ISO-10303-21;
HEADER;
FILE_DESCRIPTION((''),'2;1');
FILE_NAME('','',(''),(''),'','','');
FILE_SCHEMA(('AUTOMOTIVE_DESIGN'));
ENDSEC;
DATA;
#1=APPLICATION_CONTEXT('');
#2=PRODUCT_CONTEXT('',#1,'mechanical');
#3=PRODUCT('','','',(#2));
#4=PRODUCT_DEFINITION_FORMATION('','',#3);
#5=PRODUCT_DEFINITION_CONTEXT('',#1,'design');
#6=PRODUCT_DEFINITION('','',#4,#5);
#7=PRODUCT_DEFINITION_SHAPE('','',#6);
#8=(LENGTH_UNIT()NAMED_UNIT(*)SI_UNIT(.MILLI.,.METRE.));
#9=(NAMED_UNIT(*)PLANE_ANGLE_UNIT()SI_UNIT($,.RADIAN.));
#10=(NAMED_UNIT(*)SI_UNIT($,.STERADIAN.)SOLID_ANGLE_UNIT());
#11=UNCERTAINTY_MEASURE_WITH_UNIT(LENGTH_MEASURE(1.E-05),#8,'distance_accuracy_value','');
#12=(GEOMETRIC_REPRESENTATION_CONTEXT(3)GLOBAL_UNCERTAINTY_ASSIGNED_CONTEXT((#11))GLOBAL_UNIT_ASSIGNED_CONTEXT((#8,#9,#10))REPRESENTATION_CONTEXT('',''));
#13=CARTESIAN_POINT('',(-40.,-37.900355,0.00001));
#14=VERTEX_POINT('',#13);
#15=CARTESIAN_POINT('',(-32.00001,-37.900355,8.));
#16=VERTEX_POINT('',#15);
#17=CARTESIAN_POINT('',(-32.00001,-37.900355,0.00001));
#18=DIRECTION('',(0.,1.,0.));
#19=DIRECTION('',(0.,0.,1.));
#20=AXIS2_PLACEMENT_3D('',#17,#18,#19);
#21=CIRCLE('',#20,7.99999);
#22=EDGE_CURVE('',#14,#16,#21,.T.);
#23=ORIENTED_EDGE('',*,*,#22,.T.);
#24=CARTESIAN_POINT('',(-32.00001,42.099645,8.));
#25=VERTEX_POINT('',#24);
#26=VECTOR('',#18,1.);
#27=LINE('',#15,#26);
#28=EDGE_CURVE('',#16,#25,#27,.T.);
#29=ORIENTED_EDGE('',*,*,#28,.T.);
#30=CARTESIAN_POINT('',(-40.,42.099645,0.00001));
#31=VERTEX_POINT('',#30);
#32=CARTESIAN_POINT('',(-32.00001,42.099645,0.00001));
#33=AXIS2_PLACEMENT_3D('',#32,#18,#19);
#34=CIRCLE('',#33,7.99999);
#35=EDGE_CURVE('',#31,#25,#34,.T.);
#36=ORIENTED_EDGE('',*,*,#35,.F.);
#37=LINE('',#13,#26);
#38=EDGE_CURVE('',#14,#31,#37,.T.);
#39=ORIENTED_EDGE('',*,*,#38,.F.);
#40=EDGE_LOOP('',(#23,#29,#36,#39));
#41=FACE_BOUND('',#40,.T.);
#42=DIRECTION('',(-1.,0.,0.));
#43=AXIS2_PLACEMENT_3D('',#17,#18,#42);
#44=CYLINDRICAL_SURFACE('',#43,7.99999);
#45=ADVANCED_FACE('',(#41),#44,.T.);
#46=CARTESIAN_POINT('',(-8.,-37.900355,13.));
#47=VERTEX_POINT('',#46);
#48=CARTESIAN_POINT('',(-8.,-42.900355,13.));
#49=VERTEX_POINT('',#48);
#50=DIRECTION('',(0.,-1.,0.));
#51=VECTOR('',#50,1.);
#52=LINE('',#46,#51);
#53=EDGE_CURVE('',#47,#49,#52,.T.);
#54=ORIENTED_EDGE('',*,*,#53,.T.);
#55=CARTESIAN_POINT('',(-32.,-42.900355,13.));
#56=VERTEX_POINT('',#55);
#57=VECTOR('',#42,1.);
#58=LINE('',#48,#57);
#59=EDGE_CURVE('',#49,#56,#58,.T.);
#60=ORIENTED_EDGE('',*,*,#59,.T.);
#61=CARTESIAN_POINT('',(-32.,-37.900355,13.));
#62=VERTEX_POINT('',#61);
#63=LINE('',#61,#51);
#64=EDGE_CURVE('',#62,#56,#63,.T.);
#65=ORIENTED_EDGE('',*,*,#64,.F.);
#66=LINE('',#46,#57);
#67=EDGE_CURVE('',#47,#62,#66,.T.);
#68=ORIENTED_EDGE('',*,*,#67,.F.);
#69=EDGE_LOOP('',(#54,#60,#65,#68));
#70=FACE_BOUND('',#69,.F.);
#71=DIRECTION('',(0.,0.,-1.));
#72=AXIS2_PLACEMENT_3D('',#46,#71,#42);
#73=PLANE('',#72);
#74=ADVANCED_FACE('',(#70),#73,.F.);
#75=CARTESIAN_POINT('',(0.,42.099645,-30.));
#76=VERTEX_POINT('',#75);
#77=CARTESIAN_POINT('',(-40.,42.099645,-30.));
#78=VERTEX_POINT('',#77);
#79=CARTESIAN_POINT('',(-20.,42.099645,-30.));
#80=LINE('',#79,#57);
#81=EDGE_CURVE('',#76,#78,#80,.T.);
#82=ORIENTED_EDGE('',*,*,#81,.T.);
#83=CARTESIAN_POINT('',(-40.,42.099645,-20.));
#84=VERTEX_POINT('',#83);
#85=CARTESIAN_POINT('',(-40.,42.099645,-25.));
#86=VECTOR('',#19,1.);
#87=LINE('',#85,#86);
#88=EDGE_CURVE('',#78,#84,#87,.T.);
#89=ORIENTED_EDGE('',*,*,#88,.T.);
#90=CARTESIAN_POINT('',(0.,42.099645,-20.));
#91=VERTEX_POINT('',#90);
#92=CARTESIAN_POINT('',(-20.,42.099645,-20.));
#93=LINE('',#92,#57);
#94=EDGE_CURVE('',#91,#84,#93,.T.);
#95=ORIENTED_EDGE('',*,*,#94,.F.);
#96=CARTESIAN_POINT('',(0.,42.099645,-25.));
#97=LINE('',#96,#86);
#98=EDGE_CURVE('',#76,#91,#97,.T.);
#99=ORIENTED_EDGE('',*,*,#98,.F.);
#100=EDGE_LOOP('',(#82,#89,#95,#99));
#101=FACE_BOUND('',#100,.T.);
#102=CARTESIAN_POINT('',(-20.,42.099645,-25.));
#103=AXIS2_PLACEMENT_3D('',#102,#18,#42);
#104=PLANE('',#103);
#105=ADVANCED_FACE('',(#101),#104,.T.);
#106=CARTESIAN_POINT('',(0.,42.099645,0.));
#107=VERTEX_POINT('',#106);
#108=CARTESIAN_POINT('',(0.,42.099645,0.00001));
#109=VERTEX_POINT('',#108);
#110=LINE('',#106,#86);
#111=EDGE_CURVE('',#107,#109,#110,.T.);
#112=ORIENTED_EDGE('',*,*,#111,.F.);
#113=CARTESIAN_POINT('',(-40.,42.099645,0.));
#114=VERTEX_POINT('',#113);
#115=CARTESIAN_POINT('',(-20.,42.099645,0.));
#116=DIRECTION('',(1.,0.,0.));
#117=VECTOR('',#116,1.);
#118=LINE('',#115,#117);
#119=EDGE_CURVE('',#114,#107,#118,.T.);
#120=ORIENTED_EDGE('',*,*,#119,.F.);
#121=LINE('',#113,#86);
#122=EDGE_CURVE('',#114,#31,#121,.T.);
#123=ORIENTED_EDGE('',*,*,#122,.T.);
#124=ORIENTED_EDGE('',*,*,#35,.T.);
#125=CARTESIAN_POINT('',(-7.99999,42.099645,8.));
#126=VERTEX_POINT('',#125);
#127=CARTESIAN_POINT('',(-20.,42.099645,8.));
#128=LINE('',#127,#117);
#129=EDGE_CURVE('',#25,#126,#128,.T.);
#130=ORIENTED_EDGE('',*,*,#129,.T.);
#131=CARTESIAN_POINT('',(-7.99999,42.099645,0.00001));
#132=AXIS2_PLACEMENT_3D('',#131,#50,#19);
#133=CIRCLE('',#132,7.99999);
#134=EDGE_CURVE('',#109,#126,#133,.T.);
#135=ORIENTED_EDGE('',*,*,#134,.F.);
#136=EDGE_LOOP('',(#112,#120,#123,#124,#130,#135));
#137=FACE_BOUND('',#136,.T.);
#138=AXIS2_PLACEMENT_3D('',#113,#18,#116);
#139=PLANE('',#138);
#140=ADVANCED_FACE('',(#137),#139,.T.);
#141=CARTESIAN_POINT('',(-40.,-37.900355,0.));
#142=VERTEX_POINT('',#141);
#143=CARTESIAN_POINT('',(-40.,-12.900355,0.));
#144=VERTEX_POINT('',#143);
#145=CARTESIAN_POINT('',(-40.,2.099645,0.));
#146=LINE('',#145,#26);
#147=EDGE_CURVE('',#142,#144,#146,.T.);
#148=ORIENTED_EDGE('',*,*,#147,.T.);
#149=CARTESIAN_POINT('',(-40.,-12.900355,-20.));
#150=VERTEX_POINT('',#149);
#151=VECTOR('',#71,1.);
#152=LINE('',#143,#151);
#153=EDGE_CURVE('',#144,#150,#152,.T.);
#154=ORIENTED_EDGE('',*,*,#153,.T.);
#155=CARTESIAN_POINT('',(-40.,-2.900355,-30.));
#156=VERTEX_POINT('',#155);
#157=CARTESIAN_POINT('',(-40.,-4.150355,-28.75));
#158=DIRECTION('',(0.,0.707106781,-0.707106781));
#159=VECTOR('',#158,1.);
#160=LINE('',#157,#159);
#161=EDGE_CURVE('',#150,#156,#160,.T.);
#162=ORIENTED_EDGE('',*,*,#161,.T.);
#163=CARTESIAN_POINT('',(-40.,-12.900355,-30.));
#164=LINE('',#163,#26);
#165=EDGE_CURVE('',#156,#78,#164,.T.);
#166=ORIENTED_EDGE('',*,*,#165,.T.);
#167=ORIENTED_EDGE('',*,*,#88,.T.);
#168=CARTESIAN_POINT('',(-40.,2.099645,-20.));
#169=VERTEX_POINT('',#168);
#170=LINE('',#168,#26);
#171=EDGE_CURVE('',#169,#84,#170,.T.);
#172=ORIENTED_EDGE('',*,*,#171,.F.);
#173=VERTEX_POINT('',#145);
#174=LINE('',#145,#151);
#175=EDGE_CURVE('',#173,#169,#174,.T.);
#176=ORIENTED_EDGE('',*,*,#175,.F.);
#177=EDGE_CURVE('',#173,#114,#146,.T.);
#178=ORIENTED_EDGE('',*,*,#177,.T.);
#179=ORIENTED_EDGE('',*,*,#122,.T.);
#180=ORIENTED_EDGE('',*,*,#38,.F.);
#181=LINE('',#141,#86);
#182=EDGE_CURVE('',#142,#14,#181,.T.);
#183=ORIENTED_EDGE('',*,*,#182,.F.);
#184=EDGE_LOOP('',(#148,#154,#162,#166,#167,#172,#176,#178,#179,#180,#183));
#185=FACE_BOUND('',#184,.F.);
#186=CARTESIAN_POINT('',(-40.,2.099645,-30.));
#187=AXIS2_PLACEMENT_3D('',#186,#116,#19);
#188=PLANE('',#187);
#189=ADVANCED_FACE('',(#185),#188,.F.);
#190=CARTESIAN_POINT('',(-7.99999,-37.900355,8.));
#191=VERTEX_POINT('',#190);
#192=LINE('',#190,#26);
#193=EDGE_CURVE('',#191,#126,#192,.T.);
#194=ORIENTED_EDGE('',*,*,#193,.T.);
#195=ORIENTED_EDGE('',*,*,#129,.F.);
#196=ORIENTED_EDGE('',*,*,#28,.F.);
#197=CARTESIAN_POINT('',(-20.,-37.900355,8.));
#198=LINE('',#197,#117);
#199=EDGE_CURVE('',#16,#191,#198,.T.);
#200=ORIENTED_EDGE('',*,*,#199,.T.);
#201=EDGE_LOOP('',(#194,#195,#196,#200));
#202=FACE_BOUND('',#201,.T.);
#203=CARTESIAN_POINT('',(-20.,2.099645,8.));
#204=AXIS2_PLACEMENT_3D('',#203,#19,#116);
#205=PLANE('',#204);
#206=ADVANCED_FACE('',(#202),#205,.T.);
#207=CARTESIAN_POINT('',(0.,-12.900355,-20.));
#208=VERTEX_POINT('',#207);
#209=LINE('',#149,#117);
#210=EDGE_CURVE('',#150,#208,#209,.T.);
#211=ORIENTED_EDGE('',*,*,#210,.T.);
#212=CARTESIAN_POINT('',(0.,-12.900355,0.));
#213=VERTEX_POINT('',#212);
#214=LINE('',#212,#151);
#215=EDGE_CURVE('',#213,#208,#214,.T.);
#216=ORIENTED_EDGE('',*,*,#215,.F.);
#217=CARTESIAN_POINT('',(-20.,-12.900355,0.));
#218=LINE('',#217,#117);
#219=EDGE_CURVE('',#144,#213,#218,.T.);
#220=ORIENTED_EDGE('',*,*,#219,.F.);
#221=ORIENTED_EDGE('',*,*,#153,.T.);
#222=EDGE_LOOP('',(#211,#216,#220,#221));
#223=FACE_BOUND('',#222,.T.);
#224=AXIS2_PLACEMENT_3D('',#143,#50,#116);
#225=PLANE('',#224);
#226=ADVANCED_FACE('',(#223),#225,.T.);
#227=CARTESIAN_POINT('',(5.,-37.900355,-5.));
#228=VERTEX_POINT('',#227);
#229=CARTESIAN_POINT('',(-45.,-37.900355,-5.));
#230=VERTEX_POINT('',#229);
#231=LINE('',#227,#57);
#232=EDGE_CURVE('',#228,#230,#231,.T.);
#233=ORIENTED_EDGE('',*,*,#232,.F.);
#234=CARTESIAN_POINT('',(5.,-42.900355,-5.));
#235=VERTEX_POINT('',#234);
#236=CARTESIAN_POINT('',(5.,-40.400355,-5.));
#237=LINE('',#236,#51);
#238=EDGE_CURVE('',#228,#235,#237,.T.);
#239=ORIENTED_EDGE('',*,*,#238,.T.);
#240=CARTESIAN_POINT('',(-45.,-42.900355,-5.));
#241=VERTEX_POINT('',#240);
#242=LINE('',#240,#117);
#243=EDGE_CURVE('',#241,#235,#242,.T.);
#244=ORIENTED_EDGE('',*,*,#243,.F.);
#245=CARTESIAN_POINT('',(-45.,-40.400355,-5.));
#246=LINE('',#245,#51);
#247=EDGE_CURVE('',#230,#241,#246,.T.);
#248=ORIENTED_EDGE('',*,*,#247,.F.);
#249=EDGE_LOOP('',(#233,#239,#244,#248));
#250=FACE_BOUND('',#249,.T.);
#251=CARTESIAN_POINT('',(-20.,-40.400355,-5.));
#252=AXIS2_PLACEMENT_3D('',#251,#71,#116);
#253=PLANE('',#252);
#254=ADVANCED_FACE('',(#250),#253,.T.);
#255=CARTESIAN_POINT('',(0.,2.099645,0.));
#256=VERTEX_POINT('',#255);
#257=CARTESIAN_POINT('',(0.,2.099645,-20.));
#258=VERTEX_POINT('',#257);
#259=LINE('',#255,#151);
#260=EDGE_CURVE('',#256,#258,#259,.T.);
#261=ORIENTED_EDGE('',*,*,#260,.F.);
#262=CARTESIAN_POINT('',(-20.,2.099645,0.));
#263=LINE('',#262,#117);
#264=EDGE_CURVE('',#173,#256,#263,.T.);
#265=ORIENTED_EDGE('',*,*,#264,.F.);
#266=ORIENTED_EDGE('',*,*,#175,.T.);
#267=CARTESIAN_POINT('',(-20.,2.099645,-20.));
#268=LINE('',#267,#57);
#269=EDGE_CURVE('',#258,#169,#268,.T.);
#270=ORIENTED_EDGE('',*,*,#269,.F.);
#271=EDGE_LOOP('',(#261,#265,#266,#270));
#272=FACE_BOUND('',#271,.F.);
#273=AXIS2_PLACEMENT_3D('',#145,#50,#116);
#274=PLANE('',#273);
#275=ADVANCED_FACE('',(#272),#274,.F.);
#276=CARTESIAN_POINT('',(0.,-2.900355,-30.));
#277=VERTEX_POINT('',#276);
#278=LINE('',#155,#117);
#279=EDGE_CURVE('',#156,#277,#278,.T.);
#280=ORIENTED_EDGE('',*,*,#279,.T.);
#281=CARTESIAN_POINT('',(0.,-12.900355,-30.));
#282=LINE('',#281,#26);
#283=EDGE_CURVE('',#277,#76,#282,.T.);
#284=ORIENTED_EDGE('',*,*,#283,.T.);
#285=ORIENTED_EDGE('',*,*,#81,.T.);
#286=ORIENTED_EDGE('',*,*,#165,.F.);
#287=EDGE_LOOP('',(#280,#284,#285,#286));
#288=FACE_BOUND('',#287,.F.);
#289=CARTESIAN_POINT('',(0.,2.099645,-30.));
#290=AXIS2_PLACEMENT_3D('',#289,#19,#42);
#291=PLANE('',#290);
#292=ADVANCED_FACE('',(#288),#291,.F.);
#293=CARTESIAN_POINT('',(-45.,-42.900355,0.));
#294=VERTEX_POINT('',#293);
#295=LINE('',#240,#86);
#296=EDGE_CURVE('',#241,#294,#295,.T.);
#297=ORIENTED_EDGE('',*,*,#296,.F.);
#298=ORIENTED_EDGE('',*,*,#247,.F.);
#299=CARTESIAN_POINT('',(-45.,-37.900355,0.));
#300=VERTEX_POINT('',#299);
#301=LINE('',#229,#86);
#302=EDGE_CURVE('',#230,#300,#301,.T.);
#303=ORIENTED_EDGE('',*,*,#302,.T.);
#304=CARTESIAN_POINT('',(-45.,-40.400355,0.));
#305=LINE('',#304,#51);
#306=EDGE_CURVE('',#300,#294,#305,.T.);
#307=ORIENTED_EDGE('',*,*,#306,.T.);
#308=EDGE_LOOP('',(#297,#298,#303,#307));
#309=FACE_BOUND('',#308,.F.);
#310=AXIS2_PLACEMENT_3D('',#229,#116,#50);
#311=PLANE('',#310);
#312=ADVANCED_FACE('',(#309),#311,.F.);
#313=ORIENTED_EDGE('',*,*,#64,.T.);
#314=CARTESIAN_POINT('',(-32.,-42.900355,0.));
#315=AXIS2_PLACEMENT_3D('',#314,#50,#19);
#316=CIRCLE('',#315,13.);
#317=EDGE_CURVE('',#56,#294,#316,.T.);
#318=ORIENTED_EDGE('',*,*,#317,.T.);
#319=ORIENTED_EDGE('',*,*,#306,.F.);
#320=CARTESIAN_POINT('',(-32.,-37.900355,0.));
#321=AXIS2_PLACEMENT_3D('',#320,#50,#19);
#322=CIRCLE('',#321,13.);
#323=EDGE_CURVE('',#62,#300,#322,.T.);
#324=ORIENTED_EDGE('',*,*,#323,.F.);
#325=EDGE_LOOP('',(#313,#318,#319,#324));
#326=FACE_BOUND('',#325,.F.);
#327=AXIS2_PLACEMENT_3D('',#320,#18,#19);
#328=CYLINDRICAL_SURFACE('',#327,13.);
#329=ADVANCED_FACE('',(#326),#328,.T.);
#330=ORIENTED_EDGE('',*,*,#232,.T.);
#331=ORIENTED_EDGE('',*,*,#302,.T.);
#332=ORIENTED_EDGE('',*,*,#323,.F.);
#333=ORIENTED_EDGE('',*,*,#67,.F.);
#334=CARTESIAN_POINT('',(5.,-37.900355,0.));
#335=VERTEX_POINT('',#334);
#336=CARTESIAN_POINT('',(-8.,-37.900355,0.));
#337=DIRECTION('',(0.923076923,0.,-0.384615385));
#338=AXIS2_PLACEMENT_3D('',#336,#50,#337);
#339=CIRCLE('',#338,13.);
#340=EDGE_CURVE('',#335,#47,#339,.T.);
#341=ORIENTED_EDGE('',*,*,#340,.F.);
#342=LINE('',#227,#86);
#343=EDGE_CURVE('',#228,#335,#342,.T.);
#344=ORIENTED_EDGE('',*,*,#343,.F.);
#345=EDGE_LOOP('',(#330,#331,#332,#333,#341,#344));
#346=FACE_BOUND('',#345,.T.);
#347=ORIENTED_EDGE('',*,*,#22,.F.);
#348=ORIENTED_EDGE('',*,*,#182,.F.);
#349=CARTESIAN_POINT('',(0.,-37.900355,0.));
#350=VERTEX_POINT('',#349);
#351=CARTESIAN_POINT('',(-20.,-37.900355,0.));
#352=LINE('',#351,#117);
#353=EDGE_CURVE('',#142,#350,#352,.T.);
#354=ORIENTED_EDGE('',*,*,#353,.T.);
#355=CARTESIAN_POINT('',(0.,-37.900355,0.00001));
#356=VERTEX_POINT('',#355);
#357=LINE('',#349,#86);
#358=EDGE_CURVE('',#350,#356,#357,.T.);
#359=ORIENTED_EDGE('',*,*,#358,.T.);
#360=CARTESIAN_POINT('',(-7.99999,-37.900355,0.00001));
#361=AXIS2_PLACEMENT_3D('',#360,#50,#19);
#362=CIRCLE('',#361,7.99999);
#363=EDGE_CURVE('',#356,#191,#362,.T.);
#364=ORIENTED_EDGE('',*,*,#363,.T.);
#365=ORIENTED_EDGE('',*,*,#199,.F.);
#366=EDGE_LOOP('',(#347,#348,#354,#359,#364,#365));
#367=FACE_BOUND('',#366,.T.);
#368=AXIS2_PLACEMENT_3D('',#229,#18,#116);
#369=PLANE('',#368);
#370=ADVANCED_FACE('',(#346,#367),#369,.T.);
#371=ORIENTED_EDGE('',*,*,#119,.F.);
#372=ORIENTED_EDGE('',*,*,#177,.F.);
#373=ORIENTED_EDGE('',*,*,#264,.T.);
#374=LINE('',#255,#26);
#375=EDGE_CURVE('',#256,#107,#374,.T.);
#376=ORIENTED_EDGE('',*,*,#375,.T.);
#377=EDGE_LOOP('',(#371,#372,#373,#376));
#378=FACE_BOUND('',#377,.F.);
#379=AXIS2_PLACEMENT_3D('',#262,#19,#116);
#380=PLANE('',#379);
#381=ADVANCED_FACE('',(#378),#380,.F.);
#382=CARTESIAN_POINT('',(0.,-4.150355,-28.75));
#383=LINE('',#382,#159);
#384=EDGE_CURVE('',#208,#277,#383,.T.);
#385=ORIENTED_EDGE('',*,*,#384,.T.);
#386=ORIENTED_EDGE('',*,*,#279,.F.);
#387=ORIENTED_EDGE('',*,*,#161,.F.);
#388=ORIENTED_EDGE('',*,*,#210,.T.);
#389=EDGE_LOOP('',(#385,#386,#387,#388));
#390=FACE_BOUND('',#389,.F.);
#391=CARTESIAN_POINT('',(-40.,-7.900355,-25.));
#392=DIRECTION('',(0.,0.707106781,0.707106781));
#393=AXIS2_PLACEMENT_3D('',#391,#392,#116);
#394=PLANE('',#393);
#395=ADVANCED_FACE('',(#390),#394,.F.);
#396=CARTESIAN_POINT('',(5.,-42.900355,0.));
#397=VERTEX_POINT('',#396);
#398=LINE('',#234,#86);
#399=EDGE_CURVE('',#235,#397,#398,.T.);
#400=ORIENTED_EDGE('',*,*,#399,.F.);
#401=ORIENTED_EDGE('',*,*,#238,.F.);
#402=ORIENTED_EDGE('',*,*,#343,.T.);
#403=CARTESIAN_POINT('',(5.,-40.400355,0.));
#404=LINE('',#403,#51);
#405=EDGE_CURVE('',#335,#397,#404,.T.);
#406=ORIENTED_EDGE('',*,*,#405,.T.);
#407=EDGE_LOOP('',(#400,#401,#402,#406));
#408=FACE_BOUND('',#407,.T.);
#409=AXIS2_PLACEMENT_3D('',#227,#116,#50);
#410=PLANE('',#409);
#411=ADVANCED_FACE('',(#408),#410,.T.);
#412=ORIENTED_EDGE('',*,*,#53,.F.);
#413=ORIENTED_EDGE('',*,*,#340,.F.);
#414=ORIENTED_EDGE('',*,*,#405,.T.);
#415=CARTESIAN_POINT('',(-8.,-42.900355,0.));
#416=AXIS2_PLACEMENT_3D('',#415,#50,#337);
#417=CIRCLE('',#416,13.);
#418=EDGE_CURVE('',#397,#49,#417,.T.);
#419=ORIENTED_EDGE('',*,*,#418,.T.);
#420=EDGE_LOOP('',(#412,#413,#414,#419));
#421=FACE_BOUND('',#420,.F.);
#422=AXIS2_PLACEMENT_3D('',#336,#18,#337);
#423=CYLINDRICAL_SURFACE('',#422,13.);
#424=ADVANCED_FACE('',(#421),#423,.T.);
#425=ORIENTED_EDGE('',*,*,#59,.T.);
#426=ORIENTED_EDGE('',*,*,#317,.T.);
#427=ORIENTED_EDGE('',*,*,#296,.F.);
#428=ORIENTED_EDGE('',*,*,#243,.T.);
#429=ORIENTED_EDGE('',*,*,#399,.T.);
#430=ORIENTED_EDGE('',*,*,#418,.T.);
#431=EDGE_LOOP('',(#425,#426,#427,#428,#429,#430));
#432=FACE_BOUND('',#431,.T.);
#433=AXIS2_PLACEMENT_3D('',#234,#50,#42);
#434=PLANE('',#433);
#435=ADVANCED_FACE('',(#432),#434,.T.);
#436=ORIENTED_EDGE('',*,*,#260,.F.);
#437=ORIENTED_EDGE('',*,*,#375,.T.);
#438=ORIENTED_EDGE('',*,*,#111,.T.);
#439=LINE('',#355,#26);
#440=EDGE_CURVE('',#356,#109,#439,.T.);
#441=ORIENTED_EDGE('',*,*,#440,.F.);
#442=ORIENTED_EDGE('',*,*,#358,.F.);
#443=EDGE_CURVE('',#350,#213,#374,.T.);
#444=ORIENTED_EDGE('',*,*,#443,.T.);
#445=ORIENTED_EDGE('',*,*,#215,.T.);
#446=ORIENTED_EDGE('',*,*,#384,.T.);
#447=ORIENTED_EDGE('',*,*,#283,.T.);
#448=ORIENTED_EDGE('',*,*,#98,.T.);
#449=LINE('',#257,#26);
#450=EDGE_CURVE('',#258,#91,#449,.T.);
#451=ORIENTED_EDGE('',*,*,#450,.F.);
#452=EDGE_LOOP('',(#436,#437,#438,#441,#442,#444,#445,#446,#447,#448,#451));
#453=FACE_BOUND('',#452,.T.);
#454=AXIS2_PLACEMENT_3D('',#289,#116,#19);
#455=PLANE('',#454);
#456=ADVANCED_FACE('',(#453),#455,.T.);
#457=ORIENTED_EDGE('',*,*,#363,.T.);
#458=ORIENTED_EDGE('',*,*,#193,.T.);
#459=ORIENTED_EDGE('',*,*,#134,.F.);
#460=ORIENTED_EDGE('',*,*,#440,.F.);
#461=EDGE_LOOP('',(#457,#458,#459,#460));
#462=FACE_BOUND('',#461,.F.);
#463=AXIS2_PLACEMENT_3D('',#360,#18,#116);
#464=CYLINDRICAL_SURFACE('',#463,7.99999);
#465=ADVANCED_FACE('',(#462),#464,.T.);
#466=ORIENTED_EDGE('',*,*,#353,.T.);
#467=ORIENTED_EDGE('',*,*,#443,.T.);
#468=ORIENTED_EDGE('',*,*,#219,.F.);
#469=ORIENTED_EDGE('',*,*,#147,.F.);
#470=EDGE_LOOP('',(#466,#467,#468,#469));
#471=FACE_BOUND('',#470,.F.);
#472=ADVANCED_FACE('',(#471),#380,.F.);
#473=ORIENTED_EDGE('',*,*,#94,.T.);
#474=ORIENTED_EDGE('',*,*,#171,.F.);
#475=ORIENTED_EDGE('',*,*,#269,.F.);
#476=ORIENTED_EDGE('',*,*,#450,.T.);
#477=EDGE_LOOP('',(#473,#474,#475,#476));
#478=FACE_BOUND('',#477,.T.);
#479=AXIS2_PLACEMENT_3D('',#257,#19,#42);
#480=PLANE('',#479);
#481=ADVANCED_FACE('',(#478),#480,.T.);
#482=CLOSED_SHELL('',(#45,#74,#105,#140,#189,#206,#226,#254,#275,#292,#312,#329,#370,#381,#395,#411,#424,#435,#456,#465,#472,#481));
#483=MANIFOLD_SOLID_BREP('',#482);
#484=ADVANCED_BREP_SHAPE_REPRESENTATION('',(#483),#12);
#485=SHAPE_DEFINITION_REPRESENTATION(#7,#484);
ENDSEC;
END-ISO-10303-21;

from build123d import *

# Parameters (mm, degrees)
F0_W      = 40
F0_H      = 80
F1_DEPTH  = 8
F2_W      = 40
F2_H      = 15
F3_DEPTH  = 30
F4_W      = 40
F4_H      = 10
F5_DEPTH  = 40
F6_R      = 7.99999
F7_SIZE2  = 10
F7_SIZE   = 10
F9_DEPTH  = 5
F10_W     = 48
F10_H     = 5
F10_W_2   = 1
F11_DEPTH = 5


# Not quite as in the source:
# - a fillet or chamfer is up to 0.001 mm smaller than in the source, because OpenCascade refuses the exact size


with BuildPart() as f1:
    # F0 (on Top) → F1 (new body)
    with BuildSketch(Plane.XY):
        with Locations((-20, 2.0996452868)):
            Rectangle(F0_W, F0_H)
    extrude(amount=F1_DEPTH)

    # F2 (on face) → F3 (join)
    with BuildSketch(Plane(origin=(0, 0, 0), x_dir=(1, 0, 0), z_dir=(0, 0, -1))):
        with Locations((-20, 5.4003547132)):
            Rectangle(F2_W, F2_H)
    extrude(amount=F3_DEPTH)

    # F4 (on face) → F5 (join)
    with BuildSketch(Plane(origin=(0, 2.0996452868, 0), x_dir=(-1, 0, 0), z_dir=(0, 1, 0))):
        with Locations((20, -25)):
            Rectangle(F4_W, F4_H)
    extrude(amount=F5_DEPTH)

    # F6 (radius 8 in the source; OpenCascade refuses exactly that, so slightly less here)
    f6_edges = [f1.edges().sort_by_distance(p)[0] for p in [
        (0, 2.099645, 8),
        (-40, 2.099645, 8),
    ]]
    fillet(f6_edges, radius=F6_R)

    # F7
    f7_edges = [f1.edges().sort_by_distance(p)[0] for p in [
        (-20, -12.900355, -30),
    ]]
    chamfer(f7_edges, length=F7_SIZE, length2=F7_SIZE2)

    # F8 (on face) → F9 (join)
    with BuildSketch(Plane.XZ.offset(37.9003547132)):
        with BuildLine():
            Line((-44, -5), (4, -5))
            ThreePointArc((4, -5), (2.8166538264, 7.2111025509), (-8, 13))
            Line((-8, 13), (-32, 13))
            ThreePointArc((-32, 13), (-42.8166538264, 7.2111025509), (-44, -5))
        make_face()
    extrude(amount=F9_DEPTH)

    # F10 (on face) → F11 (join)
    with BuildSketch(Plane(origin=(0, 0, -5), x_dir=(1, 0, 0), z_dir=(0, 0, -1))):
        with Locations((-20, 40.4003547132)):
            Rectangle(F10_W, F10_H)
        with Locations((-44.5, 40.4003547132)):
            Rectangle(F10_W_2, F10_H)
        with Locations((4.5, 40.4003547132)):
            Rectangle(F10_W_2, F10_H)
    extrude(amount=-F11_DEPTH)


solid = f1.part
